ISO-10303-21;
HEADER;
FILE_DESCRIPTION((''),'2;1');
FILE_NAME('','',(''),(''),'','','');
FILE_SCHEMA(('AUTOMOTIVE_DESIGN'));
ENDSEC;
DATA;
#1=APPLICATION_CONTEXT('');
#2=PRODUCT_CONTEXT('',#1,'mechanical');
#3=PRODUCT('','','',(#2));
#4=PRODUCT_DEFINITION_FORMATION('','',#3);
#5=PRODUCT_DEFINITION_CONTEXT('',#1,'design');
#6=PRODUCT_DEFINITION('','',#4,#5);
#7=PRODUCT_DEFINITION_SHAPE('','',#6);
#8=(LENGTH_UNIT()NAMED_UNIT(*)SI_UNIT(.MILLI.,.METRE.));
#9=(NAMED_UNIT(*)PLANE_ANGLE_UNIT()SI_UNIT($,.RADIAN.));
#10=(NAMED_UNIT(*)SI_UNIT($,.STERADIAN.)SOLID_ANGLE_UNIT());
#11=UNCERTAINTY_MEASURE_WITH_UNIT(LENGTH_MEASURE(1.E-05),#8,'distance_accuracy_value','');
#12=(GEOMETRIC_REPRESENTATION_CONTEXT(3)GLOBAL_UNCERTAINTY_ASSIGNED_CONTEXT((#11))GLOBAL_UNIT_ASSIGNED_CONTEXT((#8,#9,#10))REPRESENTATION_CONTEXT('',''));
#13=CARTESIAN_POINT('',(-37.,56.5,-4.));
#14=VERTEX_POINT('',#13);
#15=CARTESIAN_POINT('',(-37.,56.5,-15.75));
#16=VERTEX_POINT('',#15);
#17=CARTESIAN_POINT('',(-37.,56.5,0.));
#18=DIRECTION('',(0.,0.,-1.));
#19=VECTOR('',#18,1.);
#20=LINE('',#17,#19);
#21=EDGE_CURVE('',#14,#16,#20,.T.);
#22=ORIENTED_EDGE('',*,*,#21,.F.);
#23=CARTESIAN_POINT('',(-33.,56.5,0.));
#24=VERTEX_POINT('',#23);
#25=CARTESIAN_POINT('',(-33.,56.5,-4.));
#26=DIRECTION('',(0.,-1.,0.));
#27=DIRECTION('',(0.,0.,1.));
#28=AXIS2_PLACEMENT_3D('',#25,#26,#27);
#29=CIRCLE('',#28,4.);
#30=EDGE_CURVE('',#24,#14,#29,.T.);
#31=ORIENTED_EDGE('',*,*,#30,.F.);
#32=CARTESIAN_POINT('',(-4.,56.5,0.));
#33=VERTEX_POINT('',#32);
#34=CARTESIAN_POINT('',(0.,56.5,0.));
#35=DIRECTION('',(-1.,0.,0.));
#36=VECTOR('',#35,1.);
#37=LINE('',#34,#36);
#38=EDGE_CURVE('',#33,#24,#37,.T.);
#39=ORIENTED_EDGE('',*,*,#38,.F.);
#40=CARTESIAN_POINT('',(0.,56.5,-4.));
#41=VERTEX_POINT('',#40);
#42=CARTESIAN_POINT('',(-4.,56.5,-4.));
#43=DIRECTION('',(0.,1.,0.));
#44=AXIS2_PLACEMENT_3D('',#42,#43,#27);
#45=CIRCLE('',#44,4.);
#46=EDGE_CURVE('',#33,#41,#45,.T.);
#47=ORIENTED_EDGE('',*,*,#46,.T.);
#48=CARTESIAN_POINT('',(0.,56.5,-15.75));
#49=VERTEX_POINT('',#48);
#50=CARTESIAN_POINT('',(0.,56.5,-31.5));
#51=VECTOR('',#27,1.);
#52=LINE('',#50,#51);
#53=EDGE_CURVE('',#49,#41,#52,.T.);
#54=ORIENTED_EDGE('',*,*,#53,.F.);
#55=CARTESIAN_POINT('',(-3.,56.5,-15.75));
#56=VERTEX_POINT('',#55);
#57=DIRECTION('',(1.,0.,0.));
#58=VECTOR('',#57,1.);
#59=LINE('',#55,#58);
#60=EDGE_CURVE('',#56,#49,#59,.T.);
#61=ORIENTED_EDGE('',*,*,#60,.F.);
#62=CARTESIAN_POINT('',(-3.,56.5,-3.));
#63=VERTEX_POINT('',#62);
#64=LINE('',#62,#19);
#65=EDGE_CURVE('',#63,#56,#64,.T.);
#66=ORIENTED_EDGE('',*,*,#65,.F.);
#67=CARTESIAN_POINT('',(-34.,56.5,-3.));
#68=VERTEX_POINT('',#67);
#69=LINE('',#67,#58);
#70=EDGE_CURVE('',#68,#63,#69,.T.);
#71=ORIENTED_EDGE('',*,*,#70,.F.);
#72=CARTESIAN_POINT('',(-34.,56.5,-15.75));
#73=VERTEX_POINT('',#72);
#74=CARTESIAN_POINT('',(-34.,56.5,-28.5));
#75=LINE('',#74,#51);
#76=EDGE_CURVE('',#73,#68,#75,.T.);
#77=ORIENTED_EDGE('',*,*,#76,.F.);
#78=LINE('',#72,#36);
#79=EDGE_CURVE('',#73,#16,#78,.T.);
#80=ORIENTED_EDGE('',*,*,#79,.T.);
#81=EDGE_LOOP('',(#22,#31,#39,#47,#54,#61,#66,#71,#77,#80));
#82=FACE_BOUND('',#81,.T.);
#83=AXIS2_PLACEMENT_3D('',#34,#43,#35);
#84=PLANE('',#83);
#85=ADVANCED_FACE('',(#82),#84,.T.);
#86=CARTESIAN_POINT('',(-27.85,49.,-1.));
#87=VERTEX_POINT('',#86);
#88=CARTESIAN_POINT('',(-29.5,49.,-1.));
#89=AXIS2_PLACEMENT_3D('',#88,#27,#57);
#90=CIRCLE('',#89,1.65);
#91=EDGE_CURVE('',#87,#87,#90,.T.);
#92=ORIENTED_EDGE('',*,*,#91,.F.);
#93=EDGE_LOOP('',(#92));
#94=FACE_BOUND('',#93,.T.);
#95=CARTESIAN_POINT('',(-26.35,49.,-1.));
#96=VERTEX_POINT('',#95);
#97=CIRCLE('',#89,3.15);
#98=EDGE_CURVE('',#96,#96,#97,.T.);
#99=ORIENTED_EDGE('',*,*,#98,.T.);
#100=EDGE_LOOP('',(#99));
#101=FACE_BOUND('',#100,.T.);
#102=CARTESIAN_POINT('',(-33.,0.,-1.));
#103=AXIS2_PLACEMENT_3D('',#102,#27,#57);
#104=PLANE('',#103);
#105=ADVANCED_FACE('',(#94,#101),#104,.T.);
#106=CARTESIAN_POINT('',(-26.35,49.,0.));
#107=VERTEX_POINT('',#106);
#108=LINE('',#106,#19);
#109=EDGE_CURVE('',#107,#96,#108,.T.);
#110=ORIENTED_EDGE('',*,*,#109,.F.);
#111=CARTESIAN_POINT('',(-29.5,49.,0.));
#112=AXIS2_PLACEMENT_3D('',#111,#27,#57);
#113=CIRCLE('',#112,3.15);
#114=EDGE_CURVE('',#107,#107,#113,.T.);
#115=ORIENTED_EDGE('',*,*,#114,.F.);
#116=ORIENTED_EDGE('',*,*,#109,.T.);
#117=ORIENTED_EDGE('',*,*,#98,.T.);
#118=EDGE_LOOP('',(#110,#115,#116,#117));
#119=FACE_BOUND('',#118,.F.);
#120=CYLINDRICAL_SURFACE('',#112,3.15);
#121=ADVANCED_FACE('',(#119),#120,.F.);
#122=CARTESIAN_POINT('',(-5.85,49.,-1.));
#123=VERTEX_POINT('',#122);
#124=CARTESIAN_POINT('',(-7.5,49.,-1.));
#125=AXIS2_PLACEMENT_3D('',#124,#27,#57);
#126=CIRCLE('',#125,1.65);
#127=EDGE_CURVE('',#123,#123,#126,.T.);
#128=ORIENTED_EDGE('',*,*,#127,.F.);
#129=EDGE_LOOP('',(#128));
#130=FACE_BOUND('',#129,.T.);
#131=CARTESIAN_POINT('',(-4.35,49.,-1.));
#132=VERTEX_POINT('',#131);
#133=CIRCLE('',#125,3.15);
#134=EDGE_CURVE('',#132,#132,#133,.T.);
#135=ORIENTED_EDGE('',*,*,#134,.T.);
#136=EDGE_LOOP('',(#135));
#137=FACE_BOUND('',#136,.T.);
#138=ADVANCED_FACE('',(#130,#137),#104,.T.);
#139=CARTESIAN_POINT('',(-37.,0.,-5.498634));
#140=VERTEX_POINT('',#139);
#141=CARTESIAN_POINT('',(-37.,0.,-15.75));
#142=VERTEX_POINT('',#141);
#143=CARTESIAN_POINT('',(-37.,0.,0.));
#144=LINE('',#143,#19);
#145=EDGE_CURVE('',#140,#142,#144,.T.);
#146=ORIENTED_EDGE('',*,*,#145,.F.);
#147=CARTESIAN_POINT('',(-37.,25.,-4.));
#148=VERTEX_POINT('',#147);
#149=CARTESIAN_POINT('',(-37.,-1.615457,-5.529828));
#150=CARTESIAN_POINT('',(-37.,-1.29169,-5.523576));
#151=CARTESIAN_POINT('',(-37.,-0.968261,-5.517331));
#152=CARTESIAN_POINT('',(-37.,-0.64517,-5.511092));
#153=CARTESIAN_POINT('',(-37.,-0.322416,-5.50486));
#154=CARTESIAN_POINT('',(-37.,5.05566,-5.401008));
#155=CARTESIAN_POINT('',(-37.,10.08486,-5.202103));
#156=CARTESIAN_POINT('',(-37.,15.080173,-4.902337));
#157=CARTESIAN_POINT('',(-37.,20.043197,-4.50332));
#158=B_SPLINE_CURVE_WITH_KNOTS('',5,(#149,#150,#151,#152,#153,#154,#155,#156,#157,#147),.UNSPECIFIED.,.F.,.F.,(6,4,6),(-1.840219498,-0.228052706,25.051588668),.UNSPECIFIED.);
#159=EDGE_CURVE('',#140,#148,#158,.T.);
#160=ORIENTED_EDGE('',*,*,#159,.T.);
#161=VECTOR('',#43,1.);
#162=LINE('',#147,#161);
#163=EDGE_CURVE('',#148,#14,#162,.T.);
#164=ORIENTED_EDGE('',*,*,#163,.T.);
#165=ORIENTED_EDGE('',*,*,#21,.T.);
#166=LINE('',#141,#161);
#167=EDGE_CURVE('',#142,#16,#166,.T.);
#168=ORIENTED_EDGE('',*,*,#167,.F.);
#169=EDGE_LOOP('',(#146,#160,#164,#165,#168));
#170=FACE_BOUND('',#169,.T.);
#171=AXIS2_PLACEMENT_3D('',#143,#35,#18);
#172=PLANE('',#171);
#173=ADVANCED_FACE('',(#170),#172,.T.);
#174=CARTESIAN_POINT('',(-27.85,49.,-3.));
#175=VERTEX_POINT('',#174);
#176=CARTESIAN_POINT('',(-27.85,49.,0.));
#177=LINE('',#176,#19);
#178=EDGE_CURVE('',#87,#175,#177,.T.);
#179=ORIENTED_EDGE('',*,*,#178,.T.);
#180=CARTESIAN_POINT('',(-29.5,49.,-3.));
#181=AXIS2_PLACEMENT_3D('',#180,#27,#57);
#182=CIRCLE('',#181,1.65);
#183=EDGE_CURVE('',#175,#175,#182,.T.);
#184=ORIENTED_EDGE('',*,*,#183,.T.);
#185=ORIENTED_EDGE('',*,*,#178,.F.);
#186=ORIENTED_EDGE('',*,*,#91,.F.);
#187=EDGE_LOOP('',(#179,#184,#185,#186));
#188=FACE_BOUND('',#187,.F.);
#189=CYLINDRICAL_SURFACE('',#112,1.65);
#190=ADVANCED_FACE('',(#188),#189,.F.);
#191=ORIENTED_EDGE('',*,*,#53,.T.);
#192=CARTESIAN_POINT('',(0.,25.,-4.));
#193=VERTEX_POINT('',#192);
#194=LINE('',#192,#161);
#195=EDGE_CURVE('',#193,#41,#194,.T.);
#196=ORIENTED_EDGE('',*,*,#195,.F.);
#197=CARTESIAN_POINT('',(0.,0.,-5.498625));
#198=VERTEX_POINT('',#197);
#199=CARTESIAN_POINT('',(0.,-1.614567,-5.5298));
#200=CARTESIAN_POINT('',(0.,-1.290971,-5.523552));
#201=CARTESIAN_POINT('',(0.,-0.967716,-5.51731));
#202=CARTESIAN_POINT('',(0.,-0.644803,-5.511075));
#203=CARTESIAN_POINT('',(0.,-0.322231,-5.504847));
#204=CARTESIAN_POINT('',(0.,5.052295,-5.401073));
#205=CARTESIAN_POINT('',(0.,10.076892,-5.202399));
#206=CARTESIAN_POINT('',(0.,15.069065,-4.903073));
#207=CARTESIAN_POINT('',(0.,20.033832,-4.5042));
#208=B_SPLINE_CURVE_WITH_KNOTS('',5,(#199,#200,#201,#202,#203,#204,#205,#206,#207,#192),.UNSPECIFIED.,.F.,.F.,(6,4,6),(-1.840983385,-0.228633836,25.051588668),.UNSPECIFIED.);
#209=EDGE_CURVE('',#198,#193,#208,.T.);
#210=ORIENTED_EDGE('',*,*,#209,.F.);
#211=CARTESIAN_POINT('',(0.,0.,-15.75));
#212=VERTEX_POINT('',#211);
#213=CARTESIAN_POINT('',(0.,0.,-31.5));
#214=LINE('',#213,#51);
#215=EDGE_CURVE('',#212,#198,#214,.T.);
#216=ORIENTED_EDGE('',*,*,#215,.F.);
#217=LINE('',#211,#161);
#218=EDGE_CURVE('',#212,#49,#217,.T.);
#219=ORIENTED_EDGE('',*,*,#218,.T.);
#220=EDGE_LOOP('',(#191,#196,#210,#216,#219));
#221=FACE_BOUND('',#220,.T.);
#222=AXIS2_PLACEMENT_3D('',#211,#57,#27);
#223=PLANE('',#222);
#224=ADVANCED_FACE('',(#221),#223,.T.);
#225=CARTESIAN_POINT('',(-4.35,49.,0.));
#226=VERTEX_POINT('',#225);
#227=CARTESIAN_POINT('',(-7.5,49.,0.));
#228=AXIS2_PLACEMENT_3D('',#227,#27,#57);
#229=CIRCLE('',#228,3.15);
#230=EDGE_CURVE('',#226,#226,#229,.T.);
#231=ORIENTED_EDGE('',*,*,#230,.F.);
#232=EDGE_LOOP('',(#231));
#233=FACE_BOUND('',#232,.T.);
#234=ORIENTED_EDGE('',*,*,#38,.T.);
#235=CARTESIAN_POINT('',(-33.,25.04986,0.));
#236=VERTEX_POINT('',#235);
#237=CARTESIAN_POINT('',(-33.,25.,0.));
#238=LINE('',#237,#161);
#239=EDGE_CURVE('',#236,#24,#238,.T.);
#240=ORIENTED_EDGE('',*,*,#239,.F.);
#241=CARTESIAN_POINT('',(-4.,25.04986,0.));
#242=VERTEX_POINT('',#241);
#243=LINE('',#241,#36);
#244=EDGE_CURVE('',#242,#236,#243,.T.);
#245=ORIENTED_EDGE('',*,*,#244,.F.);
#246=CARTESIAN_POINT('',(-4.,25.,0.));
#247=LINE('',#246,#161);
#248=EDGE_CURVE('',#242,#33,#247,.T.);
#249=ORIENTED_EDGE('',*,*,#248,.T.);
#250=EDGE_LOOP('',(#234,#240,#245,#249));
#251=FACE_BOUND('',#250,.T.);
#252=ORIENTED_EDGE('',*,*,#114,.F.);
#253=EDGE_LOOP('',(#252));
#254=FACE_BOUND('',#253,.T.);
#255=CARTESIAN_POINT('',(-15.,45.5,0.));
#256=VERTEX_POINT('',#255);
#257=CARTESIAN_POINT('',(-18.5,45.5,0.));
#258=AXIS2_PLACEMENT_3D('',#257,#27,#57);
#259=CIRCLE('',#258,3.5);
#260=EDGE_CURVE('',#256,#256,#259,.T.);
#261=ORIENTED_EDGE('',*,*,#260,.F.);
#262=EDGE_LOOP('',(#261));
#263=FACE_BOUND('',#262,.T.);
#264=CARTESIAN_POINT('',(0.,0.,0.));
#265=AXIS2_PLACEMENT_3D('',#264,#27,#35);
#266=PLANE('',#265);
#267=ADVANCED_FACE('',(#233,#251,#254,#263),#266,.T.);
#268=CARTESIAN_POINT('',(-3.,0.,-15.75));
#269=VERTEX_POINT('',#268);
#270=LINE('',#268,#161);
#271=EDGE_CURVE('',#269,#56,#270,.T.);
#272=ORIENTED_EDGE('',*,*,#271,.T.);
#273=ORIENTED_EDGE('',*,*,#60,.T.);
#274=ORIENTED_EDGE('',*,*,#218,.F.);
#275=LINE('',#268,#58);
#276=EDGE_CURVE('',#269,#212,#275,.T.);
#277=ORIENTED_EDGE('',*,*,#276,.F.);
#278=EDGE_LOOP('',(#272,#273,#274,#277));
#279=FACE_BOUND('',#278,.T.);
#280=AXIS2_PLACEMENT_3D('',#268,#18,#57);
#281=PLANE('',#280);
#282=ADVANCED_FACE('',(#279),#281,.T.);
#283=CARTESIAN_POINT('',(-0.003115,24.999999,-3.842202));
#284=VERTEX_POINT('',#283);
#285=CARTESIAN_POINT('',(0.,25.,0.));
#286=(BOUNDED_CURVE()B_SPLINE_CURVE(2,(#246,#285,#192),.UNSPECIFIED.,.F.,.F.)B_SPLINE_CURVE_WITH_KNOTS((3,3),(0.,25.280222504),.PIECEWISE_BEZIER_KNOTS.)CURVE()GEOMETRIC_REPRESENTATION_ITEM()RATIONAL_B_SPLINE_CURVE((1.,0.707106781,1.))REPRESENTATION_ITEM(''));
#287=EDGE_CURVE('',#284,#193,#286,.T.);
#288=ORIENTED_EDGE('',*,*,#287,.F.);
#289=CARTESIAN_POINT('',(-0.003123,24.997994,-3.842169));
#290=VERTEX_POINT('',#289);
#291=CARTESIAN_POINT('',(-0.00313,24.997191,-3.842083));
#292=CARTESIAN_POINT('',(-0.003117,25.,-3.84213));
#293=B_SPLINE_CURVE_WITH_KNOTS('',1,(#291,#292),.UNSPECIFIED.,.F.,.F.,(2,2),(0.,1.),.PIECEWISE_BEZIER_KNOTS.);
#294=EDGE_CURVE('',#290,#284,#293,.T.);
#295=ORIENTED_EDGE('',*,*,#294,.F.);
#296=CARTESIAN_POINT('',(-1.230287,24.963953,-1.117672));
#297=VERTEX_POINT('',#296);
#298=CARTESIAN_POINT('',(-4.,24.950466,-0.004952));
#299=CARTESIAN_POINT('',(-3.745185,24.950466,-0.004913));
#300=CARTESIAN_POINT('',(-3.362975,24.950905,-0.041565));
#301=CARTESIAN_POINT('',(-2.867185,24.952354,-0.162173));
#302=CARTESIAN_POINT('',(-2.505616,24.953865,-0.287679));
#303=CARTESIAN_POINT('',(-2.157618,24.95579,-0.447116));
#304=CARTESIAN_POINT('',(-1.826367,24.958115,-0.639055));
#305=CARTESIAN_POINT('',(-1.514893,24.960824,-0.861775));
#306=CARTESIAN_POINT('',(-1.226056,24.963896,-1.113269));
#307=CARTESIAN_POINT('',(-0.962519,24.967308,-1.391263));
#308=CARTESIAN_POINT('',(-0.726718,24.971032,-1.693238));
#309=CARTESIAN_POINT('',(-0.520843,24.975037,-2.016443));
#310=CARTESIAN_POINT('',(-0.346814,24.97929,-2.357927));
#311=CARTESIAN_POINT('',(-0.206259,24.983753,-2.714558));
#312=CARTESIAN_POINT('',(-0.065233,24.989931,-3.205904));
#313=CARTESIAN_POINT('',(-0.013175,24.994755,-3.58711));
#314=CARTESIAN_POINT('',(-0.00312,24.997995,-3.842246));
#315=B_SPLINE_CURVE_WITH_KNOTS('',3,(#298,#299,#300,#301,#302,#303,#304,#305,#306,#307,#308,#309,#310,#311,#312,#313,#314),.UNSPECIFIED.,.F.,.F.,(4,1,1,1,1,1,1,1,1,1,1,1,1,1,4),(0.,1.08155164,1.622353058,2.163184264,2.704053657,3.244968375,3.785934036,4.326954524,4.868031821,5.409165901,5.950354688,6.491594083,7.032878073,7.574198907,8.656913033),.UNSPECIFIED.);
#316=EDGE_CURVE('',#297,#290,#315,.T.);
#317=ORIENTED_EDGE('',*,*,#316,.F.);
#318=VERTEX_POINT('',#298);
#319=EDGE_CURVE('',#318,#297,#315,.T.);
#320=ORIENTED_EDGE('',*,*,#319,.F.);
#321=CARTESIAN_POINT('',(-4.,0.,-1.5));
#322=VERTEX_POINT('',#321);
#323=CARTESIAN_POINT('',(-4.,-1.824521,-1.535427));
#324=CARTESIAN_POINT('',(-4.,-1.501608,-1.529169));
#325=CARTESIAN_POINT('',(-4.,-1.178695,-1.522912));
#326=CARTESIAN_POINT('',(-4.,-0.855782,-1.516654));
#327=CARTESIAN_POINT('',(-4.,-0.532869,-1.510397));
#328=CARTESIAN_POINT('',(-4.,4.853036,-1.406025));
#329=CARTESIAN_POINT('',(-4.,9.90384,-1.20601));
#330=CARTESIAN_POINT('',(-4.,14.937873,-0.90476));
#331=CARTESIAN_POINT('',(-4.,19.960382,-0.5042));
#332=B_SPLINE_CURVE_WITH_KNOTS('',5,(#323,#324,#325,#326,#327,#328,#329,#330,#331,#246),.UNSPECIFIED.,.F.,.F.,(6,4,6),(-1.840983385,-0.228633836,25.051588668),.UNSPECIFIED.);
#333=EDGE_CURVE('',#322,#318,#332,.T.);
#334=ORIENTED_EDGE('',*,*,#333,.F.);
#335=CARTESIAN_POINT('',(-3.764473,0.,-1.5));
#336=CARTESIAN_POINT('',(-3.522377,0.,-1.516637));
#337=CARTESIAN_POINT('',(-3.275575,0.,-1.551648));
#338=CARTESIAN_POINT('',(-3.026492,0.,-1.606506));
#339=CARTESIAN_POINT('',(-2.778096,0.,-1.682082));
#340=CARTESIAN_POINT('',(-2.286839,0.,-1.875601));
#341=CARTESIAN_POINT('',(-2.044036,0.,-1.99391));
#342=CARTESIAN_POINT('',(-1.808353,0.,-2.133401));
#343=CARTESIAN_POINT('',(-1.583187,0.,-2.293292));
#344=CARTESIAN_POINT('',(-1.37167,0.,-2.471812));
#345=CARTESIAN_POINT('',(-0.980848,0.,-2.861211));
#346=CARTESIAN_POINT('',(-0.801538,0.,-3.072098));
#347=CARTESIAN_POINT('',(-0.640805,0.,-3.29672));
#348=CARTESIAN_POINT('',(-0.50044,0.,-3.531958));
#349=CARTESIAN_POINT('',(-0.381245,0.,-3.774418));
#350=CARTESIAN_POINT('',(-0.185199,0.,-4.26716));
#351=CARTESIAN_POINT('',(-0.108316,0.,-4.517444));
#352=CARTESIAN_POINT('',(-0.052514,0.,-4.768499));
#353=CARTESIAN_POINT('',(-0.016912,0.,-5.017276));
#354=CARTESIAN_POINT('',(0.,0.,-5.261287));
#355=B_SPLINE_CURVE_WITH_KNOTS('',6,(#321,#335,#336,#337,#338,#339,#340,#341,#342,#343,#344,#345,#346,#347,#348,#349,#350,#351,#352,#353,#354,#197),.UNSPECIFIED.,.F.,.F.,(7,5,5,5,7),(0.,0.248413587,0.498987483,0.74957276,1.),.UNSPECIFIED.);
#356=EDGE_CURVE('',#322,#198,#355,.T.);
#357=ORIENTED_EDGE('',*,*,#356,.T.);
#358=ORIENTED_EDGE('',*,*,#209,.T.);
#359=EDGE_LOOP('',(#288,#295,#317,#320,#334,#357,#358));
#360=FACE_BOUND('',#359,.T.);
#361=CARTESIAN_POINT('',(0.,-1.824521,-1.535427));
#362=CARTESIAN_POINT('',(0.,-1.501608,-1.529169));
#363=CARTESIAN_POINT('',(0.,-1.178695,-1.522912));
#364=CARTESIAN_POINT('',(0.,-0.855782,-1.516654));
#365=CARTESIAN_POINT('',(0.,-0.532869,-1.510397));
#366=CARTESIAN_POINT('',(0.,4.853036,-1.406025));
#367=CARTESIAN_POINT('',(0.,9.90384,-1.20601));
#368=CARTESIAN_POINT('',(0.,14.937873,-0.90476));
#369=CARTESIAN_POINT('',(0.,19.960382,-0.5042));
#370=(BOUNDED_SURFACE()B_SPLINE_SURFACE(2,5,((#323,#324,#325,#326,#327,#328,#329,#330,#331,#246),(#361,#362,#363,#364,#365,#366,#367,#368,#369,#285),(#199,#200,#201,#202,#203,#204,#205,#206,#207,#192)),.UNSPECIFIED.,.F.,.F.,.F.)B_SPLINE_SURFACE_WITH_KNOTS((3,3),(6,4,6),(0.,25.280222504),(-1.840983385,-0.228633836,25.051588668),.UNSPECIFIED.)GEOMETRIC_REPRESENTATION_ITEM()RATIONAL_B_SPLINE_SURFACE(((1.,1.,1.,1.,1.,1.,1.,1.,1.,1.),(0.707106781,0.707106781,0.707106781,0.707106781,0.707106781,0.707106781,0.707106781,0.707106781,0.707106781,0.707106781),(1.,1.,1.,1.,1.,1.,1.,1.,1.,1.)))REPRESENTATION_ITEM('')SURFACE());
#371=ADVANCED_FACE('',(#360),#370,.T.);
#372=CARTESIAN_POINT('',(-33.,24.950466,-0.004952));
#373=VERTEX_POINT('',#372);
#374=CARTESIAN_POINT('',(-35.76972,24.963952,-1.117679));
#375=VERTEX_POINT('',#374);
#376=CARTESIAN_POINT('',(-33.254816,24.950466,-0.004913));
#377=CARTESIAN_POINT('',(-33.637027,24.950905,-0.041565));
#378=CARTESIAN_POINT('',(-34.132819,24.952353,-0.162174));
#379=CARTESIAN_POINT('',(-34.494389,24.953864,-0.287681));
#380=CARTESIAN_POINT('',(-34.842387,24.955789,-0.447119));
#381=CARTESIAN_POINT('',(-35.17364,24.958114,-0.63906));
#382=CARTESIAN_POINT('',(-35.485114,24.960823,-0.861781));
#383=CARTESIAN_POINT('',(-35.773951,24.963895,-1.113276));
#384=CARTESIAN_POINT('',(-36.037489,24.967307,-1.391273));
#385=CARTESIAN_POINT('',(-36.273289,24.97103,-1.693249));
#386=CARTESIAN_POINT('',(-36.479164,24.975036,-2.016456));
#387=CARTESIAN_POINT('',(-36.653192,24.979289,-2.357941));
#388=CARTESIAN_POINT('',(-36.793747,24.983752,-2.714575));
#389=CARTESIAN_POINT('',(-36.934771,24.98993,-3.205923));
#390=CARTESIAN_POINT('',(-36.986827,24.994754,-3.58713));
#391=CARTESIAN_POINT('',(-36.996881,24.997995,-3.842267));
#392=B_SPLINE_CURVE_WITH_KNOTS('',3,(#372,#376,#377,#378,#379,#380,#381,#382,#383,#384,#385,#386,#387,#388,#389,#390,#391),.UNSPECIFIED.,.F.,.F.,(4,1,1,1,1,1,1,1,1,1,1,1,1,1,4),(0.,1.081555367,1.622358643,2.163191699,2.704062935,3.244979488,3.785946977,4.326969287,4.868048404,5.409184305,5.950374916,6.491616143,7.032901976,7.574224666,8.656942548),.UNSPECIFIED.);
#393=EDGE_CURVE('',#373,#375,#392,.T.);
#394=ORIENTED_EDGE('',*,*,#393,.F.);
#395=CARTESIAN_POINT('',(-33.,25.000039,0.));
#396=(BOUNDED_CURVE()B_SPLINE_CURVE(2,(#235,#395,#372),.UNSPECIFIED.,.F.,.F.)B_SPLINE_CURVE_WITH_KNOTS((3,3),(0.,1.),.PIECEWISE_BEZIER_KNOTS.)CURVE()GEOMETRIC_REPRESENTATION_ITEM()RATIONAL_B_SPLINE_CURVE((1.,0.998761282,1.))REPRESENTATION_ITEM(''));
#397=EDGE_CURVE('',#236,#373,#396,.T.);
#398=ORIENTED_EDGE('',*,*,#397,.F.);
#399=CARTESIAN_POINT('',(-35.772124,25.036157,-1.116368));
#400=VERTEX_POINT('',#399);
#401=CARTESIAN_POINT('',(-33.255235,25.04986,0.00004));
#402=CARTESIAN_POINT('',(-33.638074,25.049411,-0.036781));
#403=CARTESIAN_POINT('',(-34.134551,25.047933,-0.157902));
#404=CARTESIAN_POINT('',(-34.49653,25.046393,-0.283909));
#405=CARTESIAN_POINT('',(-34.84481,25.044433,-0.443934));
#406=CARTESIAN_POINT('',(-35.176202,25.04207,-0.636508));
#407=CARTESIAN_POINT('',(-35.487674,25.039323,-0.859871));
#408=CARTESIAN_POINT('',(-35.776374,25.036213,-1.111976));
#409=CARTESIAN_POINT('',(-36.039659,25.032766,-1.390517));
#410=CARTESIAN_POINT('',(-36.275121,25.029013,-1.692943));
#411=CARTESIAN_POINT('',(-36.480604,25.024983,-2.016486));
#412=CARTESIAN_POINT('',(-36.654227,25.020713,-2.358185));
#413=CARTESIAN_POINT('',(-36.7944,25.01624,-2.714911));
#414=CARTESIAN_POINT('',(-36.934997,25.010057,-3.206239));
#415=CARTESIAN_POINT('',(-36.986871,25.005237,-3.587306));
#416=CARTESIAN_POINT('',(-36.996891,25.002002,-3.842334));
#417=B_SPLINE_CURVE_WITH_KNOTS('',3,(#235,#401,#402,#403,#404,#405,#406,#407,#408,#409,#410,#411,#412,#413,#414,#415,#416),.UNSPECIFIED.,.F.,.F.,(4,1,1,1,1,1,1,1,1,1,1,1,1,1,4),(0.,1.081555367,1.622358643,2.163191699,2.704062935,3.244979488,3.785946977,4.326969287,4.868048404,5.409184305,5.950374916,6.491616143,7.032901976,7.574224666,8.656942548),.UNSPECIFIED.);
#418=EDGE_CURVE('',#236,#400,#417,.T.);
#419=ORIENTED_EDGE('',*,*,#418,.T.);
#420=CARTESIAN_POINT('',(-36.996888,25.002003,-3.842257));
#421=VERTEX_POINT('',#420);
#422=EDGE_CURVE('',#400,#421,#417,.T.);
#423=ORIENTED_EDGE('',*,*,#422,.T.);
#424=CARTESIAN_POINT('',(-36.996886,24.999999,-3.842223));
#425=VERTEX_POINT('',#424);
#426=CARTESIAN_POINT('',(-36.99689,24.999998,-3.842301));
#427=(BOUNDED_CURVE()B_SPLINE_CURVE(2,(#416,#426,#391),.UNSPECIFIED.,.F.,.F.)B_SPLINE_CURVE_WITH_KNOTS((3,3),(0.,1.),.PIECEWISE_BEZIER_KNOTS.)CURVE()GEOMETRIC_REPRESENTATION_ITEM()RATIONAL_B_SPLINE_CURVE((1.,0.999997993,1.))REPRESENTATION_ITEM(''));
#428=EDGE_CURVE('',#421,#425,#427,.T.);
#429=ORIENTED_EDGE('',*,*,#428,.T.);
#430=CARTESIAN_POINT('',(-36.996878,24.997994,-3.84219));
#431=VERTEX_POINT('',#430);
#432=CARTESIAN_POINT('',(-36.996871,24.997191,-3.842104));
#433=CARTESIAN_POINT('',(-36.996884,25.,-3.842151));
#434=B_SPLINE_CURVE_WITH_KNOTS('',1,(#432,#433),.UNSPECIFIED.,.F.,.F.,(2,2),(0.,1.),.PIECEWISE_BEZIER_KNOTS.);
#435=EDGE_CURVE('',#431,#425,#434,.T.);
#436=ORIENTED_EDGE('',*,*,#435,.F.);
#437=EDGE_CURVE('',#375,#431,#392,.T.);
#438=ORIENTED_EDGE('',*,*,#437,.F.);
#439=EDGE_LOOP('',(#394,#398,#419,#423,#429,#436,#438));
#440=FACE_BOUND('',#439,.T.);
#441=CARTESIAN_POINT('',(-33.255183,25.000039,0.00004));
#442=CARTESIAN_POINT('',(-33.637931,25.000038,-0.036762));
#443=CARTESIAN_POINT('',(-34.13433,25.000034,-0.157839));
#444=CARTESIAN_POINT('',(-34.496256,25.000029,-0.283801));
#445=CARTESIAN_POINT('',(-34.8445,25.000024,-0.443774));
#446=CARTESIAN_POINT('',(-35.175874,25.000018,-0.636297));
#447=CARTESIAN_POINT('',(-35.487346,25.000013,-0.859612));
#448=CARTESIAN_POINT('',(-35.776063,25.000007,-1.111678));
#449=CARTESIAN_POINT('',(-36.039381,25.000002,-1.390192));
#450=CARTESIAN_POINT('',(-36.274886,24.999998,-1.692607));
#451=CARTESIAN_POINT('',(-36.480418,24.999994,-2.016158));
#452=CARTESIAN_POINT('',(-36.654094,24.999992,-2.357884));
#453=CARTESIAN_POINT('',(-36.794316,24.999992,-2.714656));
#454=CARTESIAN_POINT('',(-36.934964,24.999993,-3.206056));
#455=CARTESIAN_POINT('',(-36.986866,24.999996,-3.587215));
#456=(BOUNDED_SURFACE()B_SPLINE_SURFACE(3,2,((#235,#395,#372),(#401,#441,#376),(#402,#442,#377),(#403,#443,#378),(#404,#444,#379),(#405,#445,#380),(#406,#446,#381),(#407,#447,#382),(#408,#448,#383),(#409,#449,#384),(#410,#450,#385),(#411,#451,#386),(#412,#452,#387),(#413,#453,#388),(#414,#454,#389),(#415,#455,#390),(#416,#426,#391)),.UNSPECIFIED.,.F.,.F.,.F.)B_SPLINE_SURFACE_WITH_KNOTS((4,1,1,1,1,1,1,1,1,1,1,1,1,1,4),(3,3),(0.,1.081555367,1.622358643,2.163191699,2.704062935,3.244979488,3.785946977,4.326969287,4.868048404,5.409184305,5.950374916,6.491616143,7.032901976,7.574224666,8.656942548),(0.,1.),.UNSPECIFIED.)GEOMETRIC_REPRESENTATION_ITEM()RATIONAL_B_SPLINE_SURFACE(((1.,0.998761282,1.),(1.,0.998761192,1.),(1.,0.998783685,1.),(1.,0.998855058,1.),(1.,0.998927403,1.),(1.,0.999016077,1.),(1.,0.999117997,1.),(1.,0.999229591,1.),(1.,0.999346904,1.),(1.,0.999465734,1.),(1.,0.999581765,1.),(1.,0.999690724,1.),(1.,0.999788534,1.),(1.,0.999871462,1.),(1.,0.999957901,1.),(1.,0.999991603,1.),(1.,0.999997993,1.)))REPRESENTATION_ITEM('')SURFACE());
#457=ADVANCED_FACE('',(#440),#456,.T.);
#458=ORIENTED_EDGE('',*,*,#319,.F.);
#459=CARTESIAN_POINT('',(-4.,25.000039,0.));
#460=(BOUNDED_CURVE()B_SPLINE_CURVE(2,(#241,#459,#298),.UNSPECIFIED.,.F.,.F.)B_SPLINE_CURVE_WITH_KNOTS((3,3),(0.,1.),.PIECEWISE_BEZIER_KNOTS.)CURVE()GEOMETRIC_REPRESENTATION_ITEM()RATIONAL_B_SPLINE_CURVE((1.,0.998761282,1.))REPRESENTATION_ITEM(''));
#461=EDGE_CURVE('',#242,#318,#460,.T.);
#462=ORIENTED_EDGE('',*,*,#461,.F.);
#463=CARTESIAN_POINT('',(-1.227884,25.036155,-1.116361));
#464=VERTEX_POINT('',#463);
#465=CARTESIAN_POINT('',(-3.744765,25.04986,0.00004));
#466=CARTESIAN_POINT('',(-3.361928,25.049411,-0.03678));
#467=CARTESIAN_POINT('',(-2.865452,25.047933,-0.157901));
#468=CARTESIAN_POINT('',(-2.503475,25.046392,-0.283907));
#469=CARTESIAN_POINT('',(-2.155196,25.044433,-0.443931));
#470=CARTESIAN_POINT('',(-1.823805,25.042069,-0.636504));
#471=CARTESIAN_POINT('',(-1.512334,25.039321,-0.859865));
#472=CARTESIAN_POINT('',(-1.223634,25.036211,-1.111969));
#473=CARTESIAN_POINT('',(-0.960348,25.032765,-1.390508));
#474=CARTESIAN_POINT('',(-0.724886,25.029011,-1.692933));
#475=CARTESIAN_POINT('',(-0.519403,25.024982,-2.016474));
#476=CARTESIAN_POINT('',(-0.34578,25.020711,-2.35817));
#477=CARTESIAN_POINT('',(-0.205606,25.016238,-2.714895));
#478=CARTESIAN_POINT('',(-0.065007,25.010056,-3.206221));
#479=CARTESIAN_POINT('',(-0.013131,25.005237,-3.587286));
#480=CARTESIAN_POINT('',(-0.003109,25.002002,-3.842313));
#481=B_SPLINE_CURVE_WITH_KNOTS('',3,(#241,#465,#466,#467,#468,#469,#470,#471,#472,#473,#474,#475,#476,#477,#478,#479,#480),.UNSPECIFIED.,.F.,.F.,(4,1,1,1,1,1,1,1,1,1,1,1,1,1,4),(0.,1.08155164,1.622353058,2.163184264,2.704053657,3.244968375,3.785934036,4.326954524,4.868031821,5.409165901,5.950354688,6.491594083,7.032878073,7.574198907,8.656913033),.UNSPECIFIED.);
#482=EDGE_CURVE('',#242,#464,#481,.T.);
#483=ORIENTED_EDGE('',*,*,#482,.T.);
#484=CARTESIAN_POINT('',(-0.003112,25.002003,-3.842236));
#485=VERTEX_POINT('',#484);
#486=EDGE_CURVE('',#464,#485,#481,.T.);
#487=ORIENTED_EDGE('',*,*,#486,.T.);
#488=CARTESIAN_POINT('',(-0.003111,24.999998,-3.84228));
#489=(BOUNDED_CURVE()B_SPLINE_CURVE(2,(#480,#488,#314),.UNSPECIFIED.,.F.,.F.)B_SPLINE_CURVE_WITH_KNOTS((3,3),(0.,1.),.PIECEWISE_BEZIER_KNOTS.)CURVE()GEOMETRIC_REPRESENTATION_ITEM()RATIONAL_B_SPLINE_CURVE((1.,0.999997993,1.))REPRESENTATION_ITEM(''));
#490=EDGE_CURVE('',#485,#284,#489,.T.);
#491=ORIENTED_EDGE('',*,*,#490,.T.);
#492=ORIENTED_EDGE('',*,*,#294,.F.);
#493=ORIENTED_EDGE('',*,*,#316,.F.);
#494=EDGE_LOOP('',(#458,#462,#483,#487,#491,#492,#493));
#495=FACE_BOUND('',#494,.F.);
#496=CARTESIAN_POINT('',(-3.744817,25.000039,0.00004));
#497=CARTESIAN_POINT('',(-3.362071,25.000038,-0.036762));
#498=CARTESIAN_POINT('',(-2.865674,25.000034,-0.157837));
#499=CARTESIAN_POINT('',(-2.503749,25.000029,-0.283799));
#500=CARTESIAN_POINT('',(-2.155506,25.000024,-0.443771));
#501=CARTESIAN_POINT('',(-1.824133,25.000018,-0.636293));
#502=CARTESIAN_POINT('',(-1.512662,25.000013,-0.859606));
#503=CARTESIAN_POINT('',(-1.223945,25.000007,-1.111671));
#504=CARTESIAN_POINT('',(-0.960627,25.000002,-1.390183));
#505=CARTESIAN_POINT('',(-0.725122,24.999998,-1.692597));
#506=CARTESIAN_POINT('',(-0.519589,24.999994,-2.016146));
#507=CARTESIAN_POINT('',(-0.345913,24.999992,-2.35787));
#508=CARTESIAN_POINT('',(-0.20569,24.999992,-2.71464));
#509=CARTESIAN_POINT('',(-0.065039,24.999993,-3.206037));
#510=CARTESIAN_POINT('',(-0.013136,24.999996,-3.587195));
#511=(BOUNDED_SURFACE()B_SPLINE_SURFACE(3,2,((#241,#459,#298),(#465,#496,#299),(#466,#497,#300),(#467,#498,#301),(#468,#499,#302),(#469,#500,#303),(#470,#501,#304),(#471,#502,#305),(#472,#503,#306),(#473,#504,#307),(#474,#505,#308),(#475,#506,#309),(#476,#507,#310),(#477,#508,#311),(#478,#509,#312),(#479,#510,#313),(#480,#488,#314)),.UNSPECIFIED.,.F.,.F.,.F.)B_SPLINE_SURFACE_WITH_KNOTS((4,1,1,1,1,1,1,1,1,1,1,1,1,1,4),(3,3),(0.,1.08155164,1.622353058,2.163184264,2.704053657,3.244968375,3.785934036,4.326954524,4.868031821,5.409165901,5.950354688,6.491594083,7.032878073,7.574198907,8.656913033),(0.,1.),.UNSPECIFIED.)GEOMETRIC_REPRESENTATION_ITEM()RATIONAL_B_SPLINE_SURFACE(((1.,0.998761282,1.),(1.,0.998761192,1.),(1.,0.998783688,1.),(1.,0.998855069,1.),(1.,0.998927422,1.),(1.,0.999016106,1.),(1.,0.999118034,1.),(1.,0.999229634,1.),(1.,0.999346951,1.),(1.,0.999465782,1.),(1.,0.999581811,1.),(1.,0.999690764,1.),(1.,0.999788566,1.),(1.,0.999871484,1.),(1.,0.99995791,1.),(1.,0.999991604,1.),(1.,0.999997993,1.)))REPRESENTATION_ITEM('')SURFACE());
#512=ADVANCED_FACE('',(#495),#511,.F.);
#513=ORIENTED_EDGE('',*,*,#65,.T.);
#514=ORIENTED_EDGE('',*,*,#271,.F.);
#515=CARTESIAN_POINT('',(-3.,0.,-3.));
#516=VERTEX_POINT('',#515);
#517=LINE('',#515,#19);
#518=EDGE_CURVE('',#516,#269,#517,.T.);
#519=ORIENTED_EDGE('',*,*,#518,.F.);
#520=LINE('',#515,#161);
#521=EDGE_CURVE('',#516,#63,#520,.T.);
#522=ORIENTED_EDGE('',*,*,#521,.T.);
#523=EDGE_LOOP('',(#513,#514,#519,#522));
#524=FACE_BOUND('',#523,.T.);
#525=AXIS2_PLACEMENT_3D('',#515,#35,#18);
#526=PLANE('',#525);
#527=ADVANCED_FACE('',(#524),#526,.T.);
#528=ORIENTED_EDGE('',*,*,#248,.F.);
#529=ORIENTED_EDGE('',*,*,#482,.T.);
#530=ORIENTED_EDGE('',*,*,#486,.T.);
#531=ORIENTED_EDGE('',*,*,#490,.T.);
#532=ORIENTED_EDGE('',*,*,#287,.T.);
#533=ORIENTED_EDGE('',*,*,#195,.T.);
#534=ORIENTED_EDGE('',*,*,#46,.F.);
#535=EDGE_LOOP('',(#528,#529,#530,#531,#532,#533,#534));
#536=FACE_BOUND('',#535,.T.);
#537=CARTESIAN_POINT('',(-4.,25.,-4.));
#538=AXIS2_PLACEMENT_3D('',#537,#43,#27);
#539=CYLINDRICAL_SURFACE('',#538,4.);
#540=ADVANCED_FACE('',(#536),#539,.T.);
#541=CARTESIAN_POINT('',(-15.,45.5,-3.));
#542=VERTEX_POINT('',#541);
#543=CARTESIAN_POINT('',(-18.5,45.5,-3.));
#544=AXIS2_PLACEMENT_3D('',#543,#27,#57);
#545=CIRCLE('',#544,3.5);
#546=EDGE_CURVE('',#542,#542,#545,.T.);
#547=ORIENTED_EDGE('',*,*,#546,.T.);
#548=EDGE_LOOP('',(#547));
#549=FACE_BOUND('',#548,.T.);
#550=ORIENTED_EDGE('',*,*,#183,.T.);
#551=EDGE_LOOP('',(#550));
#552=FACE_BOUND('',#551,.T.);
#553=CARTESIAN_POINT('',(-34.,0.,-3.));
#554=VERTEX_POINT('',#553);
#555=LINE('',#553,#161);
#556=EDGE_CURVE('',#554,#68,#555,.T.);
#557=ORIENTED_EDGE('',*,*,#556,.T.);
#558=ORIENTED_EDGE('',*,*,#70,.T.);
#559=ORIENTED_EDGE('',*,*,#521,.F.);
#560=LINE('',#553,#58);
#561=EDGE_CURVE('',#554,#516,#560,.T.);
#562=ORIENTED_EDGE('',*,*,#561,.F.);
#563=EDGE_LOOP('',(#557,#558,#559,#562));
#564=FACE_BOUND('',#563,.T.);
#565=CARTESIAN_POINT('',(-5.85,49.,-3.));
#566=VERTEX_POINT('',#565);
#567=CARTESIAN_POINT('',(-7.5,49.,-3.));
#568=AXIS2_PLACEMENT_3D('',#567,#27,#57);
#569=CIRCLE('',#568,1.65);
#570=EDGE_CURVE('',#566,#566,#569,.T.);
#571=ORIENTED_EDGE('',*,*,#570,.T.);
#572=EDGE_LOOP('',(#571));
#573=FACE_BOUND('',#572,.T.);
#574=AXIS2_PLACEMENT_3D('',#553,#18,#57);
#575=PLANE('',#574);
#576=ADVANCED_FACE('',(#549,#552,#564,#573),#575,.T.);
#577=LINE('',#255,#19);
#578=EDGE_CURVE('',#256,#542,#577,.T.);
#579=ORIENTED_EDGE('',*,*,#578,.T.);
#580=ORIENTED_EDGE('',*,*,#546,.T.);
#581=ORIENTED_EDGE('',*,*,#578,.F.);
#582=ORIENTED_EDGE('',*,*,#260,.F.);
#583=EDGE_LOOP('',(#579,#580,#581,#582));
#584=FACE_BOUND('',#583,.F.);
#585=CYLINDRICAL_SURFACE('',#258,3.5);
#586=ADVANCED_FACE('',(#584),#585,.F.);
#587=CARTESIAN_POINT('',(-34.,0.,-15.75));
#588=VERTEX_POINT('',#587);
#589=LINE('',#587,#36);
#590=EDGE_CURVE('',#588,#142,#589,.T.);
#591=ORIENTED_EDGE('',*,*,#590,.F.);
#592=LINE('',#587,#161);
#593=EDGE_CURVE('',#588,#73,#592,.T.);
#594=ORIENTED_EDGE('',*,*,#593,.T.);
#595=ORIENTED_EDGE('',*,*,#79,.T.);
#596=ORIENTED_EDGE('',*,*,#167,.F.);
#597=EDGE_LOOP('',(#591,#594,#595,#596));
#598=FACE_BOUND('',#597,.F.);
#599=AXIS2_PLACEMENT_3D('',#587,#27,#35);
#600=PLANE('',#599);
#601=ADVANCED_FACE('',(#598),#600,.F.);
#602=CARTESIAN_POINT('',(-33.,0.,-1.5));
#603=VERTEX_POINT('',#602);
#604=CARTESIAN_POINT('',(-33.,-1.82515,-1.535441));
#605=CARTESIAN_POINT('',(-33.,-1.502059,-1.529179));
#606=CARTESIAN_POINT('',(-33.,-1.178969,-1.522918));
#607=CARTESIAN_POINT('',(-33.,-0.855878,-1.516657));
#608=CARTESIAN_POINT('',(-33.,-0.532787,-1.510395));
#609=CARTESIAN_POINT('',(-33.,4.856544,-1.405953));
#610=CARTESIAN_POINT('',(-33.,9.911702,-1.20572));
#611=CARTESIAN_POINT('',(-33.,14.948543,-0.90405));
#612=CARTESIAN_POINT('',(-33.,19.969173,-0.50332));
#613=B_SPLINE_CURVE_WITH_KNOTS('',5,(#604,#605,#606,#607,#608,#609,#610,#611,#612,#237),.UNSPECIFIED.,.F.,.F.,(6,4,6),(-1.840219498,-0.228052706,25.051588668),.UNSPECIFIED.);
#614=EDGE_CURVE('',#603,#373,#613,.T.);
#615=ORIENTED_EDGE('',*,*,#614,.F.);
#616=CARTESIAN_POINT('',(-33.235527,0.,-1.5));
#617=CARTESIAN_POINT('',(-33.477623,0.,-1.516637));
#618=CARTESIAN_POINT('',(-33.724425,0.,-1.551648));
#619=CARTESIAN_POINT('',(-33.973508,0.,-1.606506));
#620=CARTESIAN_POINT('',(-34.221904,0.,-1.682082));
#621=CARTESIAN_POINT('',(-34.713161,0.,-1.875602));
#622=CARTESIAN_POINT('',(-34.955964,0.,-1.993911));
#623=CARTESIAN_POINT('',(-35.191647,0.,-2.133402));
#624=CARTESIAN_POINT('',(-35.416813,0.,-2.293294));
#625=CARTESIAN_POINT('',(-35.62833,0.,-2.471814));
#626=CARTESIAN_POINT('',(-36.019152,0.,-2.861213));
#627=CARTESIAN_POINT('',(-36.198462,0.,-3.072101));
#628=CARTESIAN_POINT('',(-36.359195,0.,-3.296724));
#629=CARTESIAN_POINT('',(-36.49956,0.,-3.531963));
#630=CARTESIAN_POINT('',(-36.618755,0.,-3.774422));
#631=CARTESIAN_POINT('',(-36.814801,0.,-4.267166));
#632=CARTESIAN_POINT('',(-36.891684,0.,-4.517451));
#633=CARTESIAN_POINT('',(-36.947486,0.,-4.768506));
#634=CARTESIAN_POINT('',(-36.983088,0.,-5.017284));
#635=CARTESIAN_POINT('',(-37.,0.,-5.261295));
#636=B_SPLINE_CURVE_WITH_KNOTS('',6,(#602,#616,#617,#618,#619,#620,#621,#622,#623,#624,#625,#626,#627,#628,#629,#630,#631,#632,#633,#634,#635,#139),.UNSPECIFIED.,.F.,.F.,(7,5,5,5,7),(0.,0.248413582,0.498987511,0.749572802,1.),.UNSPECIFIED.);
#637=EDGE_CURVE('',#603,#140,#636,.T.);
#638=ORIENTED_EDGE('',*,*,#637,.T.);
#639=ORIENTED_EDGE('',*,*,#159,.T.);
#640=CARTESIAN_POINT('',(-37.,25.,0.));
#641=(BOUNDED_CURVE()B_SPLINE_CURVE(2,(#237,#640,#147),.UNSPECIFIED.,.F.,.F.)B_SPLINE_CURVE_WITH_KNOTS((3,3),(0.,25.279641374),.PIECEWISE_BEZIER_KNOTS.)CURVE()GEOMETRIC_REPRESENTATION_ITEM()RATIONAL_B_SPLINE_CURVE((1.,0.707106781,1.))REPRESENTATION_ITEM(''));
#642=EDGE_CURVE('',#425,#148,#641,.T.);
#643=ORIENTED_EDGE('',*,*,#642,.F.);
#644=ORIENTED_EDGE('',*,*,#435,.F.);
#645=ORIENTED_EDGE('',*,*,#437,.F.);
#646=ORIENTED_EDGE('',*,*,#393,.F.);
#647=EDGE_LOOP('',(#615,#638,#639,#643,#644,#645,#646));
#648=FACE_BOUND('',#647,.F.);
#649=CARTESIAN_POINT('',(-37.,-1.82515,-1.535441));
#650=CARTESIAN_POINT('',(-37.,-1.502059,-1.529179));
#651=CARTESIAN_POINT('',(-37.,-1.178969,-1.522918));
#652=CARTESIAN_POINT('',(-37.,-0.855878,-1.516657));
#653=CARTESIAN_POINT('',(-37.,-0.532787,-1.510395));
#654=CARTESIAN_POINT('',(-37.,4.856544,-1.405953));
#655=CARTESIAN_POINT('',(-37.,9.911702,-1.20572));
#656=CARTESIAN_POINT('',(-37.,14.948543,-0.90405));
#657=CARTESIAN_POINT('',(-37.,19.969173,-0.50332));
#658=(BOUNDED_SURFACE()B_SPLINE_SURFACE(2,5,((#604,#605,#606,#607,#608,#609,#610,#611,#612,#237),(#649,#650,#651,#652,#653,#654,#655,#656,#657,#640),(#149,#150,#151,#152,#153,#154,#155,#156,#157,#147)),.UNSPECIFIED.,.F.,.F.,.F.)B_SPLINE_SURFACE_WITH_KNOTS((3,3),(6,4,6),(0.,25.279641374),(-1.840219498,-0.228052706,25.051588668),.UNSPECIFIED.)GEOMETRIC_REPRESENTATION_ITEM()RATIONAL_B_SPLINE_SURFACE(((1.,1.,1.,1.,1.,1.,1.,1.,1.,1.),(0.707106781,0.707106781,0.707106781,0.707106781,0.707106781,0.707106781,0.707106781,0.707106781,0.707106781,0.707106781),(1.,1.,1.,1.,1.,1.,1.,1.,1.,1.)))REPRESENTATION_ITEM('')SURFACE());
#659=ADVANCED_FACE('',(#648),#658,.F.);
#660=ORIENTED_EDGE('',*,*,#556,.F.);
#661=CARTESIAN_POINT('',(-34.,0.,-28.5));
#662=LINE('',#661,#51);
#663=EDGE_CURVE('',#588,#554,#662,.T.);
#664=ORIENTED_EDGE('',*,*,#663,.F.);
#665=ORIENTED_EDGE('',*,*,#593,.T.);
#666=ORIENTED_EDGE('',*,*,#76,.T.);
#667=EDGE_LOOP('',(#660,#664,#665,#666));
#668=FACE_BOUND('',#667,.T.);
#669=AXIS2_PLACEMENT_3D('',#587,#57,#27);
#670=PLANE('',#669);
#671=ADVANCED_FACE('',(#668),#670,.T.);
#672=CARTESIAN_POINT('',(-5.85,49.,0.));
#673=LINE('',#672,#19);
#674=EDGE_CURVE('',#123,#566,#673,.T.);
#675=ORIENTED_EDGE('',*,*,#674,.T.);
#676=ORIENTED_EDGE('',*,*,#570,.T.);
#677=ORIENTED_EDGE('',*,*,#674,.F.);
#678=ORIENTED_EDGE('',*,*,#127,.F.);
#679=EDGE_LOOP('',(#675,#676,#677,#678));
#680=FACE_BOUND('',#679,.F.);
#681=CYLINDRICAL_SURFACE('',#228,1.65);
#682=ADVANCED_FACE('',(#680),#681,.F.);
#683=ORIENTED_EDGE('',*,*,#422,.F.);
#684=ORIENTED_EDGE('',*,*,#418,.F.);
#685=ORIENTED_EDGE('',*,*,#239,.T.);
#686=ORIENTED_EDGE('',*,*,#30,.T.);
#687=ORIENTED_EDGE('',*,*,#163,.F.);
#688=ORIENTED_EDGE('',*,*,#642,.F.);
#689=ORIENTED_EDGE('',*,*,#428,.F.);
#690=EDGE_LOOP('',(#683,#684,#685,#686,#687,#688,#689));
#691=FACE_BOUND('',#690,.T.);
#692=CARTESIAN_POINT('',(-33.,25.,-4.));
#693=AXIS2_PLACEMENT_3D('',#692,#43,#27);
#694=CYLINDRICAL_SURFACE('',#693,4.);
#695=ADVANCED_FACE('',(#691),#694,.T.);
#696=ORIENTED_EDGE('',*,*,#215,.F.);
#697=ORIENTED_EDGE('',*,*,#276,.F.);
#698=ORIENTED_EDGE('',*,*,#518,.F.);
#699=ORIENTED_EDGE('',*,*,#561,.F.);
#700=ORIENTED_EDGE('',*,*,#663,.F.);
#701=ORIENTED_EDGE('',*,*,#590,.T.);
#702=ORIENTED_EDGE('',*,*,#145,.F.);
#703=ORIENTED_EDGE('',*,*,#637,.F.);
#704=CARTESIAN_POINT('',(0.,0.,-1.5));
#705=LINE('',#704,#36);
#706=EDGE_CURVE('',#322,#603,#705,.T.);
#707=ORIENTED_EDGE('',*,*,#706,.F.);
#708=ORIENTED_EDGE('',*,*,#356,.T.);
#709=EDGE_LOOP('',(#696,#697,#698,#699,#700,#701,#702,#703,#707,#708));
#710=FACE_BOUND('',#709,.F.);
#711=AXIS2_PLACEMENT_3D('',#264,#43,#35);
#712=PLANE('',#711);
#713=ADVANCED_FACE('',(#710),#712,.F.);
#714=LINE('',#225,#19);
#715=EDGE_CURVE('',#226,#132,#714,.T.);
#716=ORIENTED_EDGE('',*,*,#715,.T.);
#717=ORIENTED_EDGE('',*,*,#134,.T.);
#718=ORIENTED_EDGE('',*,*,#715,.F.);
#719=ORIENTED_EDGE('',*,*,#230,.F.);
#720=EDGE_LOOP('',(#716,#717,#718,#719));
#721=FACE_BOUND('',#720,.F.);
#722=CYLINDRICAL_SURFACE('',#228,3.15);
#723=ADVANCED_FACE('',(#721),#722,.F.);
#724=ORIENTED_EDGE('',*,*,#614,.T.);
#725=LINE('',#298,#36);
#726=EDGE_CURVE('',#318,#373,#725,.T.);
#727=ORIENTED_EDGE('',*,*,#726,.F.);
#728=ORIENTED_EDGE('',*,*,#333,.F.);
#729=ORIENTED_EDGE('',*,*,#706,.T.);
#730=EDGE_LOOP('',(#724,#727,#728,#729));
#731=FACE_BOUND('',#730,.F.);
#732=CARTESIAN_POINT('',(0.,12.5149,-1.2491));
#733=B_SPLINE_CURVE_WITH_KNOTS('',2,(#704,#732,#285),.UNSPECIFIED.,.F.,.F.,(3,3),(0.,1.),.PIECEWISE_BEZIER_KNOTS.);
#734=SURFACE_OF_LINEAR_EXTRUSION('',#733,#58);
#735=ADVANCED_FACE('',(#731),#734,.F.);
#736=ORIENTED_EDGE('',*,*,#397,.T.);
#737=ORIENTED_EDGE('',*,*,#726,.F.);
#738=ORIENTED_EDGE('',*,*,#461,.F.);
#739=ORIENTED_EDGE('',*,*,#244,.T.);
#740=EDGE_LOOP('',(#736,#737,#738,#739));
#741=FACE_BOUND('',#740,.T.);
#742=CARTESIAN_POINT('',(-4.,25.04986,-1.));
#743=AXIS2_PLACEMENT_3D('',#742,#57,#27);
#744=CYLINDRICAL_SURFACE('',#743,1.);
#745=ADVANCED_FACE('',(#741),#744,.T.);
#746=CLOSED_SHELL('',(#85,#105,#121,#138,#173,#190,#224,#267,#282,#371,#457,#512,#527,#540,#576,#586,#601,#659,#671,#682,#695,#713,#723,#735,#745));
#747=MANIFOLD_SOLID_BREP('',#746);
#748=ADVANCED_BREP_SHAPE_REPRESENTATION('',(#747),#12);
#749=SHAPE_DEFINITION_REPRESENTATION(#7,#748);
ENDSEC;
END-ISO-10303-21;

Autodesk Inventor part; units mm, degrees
ref_plane "YZ Plane" through (0, 0, 0) normal (1, 0, 0) x (0, 1, 0)
ref_plane "XZ Plane" through (0, 0, 0) normal (0, 1, 0) x (-1, 0, 0)
ref_plane "XY Plane" through (0, 0, 0) normal (0, 0, 1) x (1, 0, 0)
sketch "Esquisse1" plane through (0, 0, 0) normal (0, 1, 0) x (-1, 0, 0)
  line L0 (0, 0) -> (37, 0)
  line L1 (37, 0) -> (37, -31.5)
  line L2 (37, -31.5) -> (0, -31.5)
  line L3 (0, -31.5) -> (0, 0)
  line L4 (34, -28.5) -> (34, -3)
  line L5 (34, -3) -> (3, -3)
  line L6 (3, -3) -> (3, -28.5)
  line L7 (3, -28.5) -> (34, -28.5)
  line L8 (3, -15.75) -> (0, -15.75)
  line L9 (34, -15.75) -> (37, -15.75)
  dimension "d0" = 3
  dimension "d1" = 31
  dimension "d2" = 25.5
extrude "Extrusion1" add sketch "Esquisse1" along normal blind 56.5 contours L0 L1 L9 L4 L5 L6 L8 L3
sketch "Esquisse2" plane through (-37, 0, 0) normal (0, 0, 1) x (1, 0, 0)
  line L0 (7.5, 49) -> (29.5, 49) construction
  circle A0 centre (7.5, 49) radius 1.65
  circle A1 centre (29.5, 49) radius 1.65
  line L1 (34, 0) -> (3, 0) construction
  line L2 (18.5, 0) -> (18.5, 49) construction
  point P0 (37, 0)
  dimension "d5" = 3.3
  dimension "d6" = 49
  dimension "d7" = 22
extrude "Extrusion2" cut sketch "Esquisse2" against normal through all
sketch "Esquisse3" plane through (-33, 0, 0) normal (0, 0, 1) x (1, 0, 0)
  line L0 (-4, 56.5) -> (33, 56.5) construction
  line L1 (-4, 0) -> (33, 0) construction
  circle A0 centre (3.5, 49) radius 1.65 construction
  circle A1 centre (25.5, 49) radius 1.65 construction
  circle A2 centre (3.5, 49) radius 1.65 construction
  circle A3 centre (3.5, 49) radius 3.15
  circle A4 centre (25.5, 49) radius 3.15
  line L2 (33, 0) -> (33, 56.5) projected
  line L3 (-4, 0) -> (-4, 56.5) projected
  dimension "d11" = 6.3
extrude "Extrusion3" cut sketch "Esquisse3" against normal blind 1
sketch "Esquisse4" plane through (-33, 0, 0) normal (0, 0, 1) x (1, 0, 0)
  line L0 (-4, 56.5) -> (33, 56.5) construction
  line L1 (14.5, 56.5) -> (14.5, 0) construction
  line L2 (30, 0) -> (-1, 0) construction
  circle A0 centre (14.5, 45.5) radius 3.5
  point P0 (33, 0)
  point P1 (0, 56.5)
  point P2 (29, 56.5)
  dimension "d14" = 45.5
  dimension "d15" = 7
extrude "Extrusion4" cut sketch "Esquisse4" against normal through all
sketch "Esquisse5" plane through (0, 0, 0) normal (1, 0, 0) x (0, 0, -1)
  line L0 (0, 0) -> (1.5, 0)
  line L1 (0, 0) -> (15.75, 0) projected
  line L2 (0, 0) -> (0, 56.5) projected
  spline S0 degree 2 poles (1.5, 0) (1.2491, 12.5149) (0, 25) knots 0 0 0 1 1 1
  line L3 (0, 25) -> (0, 0)
  point P0 (1, 12.5)
  dimension "d18" = 1.5
  dimension "d19" = 25
  dimension "d20" = 12.5
  dimension "d21" = 1
extrude "Extrusion5" cut sketch "Esquisse5" against normal through all
fillet "Congé2" radius 4 4 edges at (0, 12.5075, -0.9996) (0, 40.75, 0) (-37, 40.75, 0) (-37, 12.5149, -0.9991)
fillet "Congé3" radius 1 3 edges at (-18.5, 25, 0) (-1.1716, 25, -1.1716) (-35.8284, 25, -1.1716)
equation "\"d20\" = 0.5 * d19"
properties part number "part1_top"
